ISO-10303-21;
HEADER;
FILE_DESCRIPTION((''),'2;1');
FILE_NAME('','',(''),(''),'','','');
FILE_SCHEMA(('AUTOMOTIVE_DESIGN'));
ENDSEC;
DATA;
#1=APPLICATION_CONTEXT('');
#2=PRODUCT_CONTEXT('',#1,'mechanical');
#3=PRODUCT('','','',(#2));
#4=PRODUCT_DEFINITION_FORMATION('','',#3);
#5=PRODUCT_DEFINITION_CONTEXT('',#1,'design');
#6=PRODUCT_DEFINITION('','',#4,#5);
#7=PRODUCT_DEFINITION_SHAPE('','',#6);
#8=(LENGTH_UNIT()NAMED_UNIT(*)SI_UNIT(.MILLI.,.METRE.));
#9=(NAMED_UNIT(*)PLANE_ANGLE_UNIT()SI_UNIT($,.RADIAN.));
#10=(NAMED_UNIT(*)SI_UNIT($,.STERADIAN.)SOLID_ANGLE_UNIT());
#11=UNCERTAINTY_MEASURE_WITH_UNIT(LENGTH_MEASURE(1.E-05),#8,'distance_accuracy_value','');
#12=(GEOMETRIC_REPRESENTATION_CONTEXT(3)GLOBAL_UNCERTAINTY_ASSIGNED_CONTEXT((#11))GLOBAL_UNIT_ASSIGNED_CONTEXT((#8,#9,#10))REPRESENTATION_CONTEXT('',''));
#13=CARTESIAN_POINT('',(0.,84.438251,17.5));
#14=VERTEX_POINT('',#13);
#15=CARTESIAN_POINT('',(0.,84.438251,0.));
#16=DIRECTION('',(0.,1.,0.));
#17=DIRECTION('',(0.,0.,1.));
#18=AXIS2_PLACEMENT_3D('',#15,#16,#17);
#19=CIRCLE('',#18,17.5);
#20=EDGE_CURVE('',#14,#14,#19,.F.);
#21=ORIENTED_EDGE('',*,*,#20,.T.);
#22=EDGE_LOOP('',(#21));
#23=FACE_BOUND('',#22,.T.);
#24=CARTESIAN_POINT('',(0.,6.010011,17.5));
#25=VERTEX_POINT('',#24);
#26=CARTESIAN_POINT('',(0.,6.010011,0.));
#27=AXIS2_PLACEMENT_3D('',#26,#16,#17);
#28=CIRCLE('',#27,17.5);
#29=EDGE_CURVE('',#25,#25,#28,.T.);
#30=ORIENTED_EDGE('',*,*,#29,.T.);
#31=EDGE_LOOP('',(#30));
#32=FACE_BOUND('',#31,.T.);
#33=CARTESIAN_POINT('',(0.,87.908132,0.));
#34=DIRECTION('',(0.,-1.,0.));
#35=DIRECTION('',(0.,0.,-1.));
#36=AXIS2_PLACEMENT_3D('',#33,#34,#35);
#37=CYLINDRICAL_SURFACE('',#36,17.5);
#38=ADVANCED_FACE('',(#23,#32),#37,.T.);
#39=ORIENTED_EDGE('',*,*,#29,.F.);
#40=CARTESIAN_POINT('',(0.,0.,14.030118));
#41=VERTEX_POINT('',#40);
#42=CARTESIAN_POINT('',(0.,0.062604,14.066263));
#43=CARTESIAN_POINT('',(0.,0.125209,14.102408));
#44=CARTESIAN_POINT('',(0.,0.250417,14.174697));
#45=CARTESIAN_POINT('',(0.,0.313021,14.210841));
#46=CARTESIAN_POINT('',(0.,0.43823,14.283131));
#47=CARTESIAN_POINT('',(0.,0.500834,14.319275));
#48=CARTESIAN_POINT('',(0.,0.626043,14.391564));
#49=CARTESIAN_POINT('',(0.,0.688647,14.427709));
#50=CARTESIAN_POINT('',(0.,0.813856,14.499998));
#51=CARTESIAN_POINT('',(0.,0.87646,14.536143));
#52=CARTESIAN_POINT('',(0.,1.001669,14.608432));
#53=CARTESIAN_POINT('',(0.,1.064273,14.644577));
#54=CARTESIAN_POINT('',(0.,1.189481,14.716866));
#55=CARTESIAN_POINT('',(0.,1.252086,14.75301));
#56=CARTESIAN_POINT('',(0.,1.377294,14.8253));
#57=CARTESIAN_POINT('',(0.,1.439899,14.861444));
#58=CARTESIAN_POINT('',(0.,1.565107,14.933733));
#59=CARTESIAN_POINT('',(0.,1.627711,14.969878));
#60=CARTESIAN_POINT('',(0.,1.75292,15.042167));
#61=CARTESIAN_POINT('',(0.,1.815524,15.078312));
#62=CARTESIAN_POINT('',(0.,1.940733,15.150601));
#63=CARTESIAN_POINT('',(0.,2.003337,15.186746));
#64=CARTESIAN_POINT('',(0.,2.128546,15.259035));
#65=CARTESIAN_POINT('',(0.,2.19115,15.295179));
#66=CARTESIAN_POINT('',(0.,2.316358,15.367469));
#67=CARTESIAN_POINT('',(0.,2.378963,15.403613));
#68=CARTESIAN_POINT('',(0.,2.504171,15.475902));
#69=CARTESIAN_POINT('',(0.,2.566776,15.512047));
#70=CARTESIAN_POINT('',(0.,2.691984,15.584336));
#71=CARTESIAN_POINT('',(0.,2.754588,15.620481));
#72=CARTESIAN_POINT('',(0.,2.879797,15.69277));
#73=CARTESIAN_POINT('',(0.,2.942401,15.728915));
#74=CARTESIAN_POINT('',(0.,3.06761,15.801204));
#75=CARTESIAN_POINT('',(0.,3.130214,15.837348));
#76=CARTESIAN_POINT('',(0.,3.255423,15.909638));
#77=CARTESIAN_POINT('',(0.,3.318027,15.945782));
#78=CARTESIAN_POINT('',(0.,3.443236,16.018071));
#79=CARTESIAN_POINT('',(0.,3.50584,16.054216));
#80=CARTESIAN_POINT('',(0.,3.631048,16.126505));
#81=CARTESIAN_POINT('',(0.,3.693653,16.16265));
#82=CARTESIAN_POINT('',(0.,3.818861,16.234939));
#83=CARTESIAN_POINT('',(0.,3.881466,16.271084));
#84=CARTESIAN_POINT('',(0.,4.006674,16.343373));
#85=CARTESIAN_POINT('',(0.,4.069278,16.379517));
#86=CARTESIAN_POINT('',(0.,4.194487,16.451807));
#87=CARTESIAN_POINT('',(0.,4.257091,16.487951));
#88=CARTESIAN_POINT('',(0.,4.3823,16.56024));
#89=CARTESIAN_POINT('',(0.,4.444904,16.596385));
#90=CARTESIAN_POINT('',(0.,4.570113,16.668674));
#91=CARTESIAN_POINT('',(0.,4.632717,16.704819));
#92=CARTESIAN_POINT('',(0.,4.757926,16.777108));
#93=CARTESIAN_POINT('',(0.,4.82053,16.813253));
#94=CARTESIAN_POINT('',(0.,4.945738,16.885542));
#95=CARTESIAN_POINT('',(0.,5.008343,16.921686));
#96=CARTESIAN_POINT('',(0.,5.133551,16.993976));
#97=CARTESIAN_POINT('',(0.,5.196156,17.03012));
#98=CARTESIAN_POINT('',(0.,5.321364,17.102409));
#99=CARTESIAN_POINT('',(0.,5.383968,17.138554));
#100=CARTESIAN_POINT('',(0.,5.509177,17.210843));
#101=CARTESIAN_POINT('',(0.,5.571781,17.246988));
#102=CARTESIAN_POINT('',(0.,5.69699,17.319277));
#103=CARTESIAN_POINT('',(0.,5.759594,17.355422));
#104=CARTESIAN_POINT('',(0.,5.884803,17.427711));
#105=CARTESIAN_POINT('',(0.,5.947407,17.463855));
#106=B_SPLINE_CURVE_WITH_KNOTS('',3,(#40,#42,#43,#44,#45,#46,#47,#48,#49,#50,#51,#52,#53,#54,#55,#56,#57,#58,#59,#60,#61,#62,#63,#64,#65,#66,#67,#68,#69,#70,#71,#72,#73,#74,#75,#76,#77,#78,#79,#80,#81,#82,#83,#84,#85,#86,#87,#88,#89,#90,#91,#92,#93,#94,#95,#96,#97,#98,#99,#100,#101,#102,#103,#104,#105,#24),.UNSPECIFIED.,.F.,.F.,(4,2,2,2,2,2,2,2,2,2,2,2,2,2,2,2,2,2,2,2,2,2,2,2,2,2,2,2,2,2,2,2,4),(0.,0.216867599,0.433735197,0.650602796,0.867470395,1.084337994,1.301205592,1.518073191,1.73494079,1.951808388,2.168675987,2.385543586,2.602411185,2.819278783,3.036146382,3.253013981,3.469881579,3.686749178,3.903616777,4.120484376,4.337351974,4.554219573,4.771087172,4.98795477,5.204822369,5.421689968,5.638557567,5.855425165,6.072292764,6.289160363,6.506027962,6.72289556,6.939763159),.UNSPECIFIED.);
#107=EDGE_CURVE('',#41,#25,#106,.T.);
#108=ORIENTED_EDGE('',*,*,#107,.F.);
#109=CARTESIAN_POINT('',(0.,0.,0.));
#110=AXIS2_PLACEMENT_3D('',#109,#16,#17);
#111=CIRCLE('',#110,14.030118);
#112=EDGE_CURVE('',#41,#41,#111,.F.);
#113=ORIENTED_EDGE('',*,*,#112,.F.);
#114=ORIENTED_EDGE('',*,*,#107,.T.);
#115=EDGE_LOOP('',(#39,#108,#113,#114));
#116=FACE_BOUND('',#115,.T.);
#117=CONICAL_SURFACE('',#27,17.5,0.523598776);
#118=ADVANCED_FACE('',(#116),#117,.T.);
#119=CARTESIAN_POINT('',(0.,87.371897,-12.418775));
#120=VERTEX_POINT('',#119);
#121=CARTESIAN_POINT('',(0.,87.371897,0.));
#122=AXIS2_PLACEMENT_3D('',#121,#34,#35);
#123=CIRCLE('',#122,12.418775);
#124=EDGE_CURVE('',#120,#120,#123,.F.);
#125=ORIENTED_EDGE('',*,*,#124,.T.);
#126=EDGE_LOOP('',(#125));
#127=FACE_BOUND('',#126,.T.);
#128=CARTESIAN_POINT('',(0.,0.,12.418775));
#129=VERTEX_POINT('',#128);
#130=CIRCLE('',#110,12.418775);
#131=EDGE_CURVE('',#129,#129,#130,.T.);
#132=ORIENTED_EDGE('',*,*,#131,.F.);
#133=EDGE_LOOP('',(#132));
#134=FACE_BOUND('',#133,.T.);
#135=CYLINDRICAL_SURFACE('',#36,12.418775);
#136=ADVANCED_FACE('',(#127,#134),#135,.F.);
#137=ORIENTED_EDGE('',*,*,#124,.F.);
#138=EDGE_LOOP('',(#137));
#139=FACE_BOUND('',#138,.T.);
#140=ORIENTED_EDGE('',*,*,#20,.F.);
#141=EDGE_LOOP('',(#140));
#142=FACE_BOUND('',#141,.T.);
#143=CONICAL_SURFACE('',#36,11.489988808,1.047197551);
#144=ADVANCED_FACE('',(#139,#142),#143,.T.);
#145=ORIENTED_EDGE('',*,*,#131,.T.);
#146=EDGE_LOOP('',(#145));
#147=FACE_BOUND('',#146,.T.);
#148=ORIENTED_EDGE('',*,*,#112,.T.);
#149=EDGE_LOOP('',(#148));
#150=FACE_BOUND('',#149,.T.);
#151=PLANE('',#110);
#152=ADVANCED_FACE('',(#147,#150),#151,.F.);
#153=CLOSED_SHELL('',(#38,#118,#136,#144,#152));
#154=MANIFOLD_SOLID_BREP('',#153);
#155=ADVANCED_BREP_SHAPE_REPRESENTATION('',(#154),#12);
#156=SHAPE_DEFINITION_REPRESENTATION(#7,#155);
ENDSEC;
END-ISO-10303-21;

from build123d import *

# Parameters (mm, degrees)
SKETCH1_R           = 17.5
BOSS_EXTRUDE1_DEPTH = 87.908132
SKETCH2_R           = 12.41877506
CUT_EXTRUDE1_DEPTH  = 92.325460151
CHAMFER1_SIZE       = 3.469882
CHAMFER1_SIZE_2     = 6.010011


with BuildPart() as part:
    # Sketch1 → Boss-Extrude1 (new body)
    with BuildSketch(Plane(origin=(0, 0, 0), x_dir=(1, 0, 0), z_dir=(0, 1, 0))):
        with Locations(Location((0, 0, 0), (0, 0, 270))):
            Circle(SKETCH1_R)
    extrude(amount=BOSS_EXTRUDE1_DEPTH)

    # Sketch2 → Cut-Extrude1 (cut, through all)
    with BuildSketch(Plane(origin=(0, 0, 0), x_dir=(1, 0, 0), z_dir=(0, 1, 0))):
        with Locations(Location((0, 0, 0), (0, 0, 270))):
            Circle(SKETCH2_R)
    extrude(amount=CUT_EXTRUDE1_DEPTH, mode=Mode.SUBTRACT)

    # Chamfer1
    # the kernel refuses this chamfer: 6.010011, 3.469882 mm, written as the material it takes off along each edge
    with BuildSketch(Plane(origin=(0, 87.908132, 0), x_dir=(0, 0, 1), z_dir=(-1, 0, 0))) as chamfer1_piece_1:
        Polygon((17.5, -CHAMFER1_SIZE), (17.5 - CHAMFER1_SIZE_2, 0), (17.5, 0), align=None)
    revolve(axis=Axis((0, 87.908132, 0), (0, 1, 0)), mode=Mode.SUBTRACT)
    with BuildSketch(Plane(origin=(0, 0, 0), x_dir=(0, 0, 1), z_dir=(-1, 0, 0))) as chamfer1_piece_2:
        Polygon((17.5, CHAMFER1_SIZE_2), (17.5 - CHAMFER1_SIZE, 0), (17.5, 0), align=None)
    revolve(axis=Axis((0, 0, 0), (0, 1, 0)), mode=Mode.SUBTRACT)


solid = part.part
